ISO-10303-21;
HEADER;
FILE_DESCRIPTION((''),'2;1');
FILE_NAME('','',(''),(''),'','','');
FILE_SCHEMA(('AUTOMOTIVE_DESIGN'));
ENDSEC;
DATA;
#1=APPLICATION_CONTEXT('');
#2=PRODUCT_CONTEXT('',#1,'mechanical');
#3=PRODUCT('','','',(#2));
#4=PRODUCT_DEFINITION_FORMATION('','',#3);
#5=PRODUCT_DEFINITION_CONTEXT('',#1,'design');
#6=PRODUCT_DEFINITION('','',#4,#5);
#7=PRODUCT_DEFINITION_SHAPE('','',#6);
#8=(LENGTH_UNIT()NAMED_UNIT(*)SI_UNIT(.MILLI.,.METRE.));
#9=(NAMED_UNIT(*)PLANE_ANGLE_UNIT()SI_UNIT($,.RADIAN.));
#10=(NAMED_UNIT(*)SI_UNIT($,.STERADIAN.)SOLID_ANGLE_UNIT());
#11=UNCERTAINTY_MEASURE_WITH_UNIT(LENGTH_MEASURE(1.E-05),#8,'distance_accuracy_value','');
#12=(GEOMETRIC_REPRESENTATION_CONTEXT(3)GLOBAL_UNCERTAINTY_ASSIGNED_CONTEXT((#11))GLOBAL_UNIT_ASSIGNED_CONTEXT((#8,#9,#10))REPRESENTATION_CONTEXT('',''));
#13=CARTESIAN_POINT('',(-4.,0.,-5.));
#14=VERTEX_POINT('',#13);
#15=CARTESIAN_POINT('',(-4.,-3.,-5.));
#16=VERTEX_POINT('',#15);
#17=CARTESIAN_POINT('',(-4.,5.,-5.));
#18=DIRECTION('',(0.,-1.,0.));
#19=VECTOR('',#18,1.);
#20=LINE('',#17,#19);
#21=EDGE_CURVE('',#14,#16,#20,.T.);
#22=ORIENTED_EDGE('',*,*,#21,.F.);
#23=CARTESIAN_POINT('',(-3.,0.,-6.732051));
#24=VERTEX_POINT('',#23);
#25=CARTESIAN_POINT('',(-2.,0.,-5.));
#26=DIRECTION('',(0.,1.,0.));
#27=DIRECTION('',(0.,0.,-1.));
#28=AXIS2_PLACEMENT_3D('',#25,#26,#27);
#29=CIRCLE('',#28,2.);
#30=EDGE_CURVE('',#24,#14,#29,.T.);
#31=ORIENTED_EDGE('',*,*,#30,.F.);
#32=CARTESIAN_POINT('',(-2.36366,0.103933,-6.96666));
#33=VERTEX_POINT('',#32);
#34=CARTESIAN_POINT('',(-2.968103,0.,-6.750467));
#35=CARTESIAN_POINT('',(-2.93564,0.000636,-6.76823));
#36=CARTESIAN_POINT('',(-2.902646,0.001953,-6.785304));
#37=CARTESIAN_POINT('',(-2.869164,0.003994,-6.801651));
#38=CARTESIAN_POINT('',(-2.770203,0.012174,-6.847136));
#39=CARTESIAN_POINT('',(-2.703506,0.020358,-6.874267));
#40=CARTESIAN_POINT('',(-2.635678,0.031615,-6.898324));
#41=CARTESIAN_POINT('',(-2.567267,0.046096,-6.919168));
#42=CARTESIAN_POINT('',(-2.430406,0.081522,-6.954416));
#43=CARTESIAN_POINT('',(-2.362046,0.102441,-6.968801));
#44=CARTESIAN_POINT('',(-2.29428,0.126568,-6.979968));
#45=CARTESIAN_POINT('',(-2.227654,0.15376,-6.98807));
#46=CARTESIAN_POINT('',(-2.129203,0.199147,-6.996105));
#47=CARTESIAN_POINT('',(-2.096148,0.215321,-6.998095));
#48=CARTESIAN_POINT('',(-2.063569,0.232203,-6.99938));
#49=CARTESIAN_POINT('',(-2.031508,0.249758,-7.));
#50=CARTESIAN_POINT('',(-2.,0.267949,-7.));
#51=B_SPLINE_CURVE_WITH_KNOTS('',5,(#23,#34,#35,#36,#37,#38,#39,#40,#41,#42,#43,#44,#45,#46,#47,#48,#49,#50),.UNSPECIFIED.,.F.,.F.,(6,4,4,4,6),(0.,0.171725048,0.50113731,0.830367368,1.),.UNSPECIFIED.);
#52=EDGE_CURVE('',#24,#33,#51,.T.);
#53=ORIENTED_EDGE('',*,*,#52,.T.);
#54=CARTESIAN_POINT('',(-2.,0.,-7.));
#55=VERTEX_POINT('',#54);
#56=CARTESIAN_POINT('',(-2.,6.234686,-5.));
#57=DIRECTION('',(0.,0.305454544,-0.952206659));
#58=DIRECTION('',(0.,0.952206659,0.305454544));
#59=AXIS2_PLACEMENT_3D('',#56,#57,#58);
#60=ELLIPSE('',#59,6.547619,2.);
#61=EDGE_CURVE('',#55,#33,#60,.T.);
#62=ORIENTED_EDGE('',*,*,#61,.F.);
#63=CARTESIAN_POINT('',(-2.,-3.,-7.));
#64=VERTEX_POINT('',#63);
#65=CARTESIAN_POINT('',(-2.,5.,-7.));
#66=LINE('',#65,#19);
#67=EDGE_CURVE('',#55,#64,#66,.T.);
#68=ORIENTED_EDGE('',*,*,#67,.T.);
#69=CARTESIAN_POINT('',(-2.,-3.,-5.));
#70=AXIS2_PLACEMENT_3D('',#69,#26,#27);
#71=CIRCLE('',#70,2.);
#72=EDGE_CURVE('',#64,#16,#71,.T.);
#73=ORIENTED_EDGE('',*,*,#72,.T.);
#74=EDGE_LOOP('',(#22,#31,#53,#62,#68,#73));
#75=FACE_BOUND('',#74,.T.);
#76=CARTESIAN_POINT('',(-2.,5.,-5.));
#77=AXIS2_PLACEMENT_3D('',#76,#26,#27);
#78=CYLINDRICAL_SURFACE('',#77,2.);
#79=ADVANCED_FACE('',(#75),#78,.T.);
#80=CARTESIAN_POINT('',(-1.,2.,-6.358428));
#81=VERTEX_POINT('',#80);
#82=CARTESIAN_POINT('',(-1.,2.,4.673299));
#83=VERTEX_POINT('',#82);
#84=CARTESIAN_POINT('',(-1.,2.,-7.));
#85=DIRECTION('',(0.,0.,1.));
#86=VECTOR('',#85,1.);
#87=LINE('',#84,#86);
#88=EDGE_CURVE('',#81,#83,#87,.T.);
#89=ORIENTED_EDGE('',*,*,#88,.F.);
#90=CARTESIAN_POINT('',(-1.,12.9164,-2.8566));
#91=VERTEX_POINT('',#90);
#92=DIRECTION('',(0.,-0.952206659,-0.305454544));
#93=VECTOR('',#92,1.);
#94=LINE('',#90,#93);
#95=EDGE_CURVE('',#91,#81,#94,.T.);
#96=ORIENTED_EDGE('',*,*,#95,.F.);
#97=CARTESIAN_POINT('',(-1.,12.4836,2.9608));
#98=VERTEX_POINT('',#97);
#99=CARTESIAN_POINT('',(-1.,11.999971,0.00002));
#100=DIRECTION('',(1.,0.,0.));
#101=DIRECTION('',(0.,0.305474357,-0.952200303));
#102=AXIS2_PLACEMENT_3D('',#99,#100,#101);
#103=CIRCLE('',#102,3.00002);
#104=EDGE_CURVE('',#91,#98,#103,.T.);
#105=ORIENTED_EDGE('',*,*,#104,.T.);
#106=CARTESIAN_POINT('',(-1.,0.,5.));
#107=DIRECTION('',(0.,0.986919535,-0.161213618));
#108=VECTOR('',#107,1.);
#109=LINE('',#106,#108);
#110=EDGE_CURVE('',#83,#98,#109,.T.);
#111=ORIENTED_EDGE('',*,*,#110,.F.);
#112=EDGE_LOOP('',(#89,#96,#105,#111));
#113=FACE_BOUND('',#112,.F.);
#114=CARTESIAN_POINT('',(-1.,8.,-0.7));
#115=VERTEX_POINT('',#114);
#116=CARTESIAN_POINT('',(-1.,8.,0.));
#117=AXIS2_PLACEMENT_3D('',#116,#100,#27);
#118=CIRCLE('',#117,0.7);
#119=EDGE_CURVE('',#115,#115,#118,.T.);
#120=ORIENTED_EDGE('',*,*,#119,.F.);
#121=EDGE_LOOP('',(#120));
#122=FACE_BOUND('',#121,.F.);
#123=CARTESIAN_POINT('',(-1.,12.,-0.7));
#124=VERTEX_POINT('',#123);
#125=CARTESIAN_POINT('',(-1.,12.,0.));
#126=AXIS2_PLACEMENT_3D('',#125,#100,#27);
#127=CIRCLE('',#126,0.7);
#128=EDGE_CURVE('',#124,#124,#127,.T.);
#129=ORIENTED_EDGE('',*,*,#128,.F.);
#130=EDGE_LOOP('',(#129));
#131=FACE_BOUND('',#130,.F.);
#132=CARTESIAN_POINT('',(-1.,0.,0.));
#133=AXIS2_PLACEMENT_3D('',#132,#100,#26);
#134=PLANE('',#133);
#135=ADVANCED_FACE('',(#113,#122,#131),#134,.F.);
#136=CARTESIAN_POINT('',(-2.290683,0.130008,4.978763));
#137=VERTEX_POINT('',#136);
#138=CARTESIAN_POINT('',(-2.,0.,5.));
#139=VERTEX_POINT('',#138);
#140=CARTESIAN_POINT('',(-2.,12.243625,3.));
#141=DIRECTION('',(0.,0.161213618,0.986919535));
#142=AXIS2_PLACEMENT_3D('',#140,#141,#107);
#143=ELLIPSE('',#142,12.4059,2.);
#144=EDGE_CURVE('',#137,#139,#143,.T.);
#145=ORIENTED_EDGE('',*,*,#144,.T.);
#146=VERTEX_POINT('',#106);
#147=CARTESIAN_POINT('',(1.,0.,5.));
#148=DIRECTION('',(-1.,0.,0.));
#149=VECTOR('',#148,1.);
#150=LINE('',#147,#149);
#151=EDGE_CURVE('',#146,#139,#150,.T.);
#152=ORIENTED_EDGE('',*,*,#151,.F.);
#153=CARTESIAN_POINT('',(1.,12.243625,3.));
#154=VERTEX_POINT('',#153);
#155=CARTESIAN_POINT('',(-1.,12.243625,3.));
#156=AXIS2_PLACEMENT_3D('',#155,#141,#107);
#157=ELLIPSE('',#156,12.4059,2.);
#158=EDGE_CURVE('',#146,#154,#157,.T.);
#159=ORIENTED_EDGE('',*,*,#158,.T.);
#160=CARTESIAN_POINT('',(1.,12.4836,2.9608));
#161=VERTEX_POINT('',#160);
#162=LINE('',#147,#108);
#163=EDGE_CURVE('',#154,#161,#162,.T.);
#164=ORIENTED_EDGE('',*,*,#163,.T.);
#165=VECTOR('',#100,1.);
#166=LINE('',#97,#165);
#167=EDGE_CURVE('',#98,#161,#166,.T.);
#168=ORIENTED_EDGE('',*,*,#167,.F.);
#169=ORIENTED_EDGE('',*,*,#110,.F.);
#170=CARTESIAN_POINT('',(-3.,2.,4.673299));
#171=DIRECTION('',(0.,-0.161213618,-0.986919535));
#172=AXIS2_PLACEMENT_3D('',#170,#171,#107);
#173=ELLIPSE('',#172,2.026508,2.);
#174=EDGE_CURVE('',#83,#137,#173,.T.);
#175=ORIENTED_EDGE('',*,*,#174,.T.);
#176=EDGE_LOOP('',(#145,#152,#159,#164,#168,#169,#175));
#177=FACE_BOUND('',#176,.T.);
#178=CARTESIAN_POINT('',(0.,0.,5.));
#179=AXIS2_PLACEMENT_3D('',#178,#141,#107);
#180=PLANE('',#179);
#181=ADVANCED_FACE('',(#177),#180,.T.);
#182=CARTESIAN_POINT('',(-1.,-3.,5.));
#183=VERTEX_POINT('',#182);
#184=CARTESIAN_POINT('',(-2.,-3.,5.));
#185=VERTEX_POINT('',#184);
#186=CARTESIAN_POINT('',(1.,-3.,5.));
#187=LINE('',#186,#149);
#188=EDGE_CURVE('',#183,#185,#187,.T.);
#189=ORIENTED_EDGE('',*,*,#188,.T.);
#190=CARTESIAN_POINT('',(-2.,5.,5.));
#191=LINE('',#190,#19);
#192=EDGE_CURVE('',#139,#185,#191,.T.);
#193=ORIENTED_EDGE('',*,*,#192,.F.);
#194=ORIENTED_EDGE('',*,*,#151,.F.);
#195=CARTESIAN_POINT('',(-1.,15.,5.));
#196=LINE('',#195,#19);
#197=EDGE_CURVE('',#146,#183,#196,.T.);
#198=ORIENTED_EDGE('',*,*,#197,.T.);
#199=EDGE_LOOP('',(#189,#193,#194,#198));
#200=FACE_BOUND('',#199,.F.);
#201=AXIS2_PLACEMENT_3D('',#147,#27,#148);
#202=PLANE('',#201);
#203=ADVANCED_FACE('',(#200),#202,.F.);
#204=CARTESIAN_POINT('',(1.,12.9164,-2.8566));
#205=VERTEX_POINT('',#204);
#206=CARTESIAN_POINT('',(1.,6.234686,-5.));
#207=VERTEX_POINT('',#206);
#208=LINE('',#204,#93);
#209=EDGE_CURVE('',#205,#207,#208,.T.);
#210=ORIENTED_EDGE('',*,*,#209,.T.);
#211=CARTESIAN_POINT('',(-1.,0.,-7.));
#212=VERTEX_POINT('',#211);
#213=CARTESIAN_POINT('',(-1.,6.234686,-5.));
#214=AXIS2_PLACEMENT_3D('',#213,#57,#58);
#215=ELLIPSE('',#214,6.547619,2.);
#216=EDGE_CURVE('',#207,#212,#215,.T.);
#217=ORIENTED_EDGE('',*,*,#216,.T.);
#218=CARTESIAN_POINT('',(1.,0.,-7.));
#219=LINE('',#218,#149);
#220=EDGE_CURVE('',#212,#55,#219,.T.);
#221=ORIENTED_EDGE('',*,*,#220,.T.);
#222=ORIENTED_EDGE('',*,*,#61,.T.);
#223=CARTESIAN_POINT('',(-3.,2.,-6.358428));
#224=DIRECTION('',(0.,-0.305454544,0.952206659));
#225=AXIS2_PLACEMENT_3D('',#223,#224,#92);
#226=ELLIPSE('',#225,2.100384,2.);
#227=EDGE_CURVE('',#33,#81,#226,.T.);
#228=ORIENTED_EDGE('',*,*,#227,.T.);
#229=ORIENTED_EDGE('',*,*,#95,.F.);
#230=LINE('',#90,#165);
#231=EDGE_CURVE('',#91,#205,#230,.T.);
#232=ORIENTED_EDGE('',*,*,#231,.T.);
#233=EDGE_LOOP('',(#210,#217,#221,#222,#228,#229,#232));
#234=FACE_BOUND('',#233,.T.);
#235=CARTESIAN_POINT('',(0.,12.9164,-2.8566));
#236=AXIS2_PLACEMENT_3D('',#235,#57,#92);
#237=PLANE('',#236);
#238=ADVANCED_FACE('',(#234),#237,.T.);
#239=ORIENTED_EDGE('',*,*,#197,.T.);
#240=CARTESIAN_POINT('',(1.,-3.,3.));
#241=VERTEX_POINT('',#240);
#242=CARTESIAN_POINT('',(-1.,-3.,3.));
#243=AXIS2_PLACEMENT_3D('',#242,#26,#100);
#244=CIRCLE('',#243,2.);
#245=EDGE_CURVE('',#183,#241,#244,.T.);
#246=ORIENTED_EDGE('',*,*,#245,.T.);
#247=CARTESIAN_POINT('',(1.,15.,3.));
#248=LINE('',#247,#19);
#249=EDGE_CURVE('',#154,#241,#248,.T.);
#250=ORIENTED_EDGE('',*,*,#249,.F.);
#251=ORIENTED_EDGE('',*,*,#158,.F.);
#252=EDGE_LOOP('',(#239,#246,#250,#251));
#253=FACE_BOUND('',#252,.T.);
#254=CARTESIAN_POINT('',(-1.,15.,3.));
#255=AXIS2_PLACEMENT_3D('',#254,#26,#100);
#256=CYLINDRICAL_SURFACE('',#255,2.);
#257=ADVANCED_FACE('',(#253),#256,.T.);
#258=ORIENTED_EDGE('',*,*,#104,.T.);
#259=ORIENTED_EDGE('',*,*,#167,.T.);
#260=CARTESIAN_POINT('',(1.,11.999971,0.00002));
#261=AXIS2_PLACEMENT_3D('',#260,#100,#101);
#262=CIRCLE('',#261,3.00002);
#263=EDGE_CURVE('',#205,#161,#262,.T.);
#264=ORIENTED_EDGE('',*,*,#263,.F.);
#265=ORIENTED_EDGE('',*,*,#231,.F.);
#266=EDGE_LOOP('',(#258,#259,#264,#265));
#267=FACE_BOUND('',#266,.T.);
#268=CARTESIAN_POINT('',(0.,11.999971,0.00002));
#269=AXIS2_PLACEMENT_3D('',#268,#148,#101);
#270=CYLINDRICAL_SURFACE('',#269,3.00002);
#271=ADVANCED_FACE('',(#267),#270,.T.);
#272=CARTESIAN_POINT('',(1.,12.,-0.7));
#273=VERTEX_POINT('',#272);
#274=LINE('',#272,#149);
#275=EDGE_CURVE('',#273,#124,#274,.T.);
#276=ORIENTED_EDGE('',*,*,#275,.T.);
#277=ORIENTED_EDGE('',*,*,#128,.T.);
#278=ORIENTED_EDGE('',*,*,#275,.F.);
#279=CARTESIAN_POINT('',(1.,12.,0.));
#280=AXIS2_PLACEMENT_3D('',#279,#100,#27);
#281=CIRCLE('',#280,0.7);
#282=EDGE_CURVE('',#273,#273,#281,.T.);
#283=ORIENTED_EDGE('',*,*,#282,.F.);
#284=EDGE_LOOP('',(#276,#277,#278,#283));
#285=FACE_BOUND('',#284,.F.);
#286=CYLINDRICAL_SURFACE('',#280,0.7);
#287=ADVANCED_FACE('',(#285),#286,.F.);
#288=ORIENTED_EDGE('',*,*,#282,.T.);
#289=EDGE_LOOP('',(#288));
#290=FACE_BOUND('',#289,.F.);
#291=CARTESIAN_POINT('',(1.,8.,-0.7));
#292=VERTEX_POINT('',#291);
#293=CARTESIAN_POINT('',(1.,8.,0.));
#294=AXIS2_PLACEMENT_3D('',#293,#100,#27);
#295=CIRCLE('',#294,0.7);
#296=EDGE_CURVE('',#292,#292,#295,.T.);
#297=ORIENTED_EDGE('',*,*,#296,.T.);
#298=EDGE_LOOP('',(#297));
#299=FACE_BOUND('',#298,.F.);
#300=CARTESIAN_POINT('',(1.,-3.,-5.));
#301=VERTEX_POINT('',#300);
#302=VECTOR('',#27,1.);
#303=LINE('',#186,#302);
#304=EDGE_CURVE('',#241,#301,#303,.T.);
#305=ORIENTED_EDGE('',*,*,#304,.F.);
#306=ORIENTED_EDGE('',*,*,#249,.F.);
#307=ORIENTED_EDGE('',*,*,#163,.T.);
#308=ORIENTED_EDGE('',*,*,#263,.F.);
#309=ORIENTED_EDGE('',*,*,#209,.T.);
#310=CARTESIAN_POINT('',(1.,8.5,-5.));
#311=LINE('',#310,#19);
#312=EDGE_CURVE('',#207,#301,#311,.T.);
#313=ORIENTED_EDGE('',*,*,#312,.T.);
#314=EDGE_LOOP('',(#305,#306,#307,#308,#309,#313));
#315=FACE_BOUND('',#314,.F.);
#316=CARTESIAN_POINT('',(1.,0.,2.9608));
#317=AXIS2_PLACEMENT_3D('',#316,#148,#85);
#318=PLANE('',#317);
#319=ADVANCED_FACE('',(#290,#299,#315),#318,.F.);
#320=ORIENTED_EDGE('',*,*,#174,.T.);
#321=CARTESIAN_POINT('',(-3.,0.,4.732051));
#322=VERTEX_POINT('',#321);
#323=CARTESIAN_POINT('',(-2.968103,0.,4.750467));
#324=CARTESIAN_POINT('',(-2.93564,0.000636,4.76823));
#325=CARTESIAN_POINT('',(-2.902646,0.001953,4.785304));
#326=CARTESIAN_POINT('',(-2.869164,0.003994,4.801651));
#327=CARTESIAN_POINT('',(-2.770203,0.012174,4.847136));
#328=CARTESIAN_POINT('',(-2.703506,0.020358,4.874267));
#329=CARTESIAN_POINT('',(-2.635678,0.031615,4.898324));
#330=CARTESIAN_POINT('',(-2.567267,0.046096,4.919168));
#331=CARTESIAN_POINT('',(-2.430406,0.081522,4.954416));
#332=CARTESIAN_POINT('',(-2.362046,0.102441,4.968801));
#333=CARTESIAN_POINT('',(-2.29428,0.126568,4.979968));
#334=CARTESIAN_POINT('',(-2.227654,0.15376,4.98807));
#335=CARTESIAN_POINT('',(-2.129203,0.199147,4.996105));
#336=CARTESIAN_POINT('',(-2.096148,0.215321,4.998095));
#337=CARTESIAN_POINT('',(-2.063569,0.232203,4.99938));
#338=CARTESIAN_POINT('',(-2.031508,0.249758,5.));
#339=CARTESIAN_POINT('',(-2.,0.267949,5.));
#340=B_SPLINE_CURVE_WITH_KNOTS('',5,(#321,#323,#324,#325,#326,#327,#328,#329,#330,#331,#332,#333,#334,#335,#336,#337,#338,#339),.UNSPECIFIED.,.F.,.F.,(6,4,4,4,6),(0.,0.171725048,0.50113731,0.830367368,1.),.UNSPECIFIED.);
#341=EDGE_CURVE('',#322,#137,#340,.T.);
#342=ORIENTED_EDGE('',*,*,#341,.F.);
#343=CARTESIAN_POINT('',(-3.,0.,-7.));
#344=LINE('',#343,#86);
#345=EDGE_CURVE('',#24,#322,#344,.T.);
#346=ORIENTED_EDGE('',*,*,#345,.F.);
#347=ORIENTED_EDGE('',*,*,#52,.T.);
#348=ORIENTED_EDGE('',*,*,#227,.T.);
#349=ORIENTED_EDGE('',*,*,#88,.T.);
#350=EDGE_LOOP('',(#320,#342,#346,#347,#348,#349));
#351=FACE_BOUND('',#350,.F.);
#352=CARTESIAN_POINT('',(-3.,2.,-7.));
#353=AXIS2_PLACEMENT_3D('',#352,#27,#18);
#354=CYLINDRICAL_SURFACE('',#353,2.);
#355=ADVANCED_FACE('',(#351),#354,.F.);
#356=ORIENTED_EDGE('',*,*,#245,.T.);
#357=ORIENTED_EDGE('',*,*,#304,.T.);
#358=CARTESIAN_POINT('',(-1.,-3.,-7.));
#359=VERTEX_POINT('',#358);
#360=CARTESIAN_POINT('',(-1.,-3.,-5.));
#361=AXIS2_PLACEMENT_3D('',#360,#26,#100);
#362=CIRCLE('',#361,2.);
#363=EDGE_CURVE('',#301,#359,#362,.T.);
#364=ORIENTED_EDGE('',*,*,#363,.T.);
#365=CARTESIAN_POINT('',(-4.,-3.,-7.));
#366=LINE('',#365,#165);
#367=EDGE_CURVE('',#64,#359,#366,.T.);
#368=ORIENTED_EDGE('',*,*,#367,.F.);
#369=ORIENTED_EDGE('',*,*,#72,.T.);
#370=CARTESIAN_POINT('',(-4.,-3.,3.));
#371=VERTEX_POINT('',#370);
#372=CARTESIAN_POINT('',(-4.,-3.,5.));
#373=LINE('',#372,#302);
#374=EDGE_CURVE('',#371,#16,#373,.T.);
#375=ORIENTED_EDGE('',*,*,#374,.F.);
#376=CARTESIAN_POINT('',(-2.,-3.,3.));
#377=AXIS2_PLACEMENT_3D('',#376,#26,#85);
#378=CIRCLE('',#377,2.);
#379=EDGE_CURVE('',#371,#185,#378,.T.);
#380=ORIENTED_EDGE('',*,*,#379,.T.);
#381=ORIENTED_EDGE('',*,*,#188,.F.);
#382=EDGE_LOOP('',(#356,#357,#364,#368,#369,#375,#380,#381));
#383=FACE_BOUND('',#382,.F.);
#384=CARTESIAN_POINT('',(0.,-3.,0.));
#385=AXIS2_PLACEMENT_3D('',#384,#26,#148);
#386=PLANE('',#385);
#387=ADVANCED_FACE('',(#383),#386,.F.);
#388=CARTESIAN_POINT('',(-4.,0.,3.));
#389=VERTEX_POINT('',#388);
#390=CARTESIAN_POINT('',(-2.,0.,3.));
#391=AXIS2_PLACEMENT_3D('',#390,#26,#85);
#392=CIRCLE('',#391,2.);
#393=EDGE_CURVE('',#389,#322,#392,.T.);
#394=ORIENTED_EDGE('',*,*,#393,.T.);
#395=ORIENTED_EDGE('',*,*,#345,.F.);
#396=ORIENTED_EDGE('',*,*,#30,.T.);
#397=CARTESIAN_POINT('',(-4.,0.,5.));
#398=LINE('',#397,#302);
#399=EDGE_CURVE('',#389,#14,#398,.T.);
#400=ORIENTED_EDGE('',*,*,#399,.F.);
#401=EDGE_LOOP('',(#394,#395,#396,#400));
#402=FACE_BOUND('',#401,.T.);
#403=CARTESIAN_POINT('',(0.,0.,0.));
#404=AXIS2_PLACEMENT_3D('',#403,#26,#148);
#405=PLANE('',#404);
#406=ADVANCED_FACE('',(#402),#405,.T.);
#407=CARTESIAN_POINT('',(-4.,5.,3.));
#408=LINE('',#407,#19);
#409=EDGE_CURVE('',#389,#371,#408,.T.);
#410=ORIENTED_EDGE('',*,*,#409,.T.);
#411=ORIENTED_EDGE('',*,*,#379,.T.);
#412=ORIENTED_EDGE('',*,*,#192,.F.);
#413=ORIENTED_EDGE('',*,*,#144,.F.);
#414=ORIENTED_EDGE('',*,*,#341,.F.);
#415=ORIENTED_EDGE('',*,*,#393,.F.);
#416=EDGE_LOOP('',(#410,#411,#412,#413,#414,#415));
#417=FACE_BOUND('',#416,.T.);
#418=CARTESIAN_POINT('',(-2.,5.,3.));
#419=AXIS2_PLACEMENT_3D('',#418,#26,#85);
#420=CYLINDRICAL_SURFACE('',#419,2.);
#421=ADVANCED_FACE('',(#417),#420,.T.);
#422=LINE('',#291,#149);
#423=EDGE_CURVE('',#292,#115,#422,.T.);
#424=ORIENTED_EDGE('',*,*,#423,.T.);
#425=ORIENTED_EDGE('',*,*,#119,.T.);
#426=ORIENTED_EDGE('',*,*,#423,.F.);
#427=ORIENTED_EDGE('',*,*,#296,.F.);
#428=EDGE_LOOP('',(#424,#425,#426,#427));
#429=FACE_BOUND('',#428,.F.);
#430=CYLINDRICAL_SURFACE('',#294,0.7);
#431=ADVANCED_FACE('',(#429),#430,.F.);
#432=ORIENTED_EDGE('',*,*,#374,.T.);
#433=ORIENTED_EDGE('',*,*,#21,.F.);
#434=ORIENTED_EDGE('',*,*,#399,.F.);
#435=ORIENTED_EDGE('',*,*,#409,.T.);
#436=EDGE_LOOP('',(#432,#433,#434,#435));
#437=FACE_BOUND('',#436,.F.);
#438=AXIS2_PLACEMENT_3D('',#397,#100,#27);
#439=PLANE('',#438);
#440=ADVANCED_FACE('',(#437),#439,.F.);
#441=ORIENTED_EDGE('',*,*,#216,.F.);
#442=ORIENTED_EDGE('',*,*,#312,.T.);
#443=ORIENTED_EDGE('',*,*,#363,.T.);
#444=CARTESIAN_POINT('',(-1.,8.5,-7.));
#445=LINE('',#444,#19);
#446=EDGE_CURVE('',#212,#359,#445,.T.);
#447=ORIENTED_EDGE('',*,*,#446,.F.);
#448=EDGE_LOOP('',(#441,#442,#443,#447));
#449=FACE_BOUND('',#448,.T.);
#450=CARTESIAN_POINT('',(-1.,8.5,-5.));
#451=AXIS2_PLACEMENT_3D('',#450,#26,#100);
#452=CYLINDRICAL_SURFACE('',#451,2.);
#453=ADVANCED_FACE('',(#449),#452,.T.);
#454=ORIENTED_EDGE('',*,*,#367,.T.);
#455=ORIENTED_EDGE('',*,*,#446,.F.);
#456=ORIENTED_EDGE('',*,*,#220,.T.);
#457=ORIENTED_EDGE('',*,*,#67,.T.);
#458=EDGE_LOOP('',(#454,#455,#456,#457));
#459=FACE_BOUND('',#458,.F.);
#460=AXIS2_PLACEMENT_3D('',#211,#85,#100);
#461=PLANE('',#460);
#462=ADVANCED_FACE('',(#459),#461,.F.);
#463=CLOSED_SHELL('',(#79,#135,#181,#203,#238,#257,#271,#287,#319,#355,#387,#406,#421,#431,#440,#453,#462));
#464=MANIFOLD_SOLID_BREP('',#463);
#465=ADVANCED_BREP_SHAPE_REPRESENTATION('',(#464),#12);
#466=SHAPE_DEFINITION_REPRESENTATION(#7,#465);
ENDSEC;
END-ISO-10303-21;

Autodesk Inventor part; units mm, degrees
ref_plane "YZ Plane" through (0, 0, 0) normal (1, 0, 0) x (0, 1, 0)
ref_plane "XZ Plane" through (0, 0, 0) normal (0, 1, 0) x (-1, 0, 0)
ref_plane "XY Plane" through (0, 0, 0) normal (0, 0, 1) x (1, 0, 0)
sketch "Skizze1" plane through (0, 0, 0) normal (1, 0, 0) x (0, 1, 0)
  arc A0 (12.9164, -2.8566) -> (12.4836, 2.9608) centre (12, 0) ccw
  line L0 (12.9164, -2.8566) -> (0, -7)
  line L1 (0, -7) -> (0, 5)
  line L2 (0, 5) -> (12.4836, 2.9608)
  point P0 (0, 0)
  dimension "d0" = 3
  dimension "d1" = 12
  dimension "d2" = 12
  dimension "d3" = 5
extrude "Extrusion1" add sketch "Skizze1" along normal mid plane 2
sketch "Skizze2" plane through (0, 0, 0) normal (0, 1, 0) x (-1, 0, 0)
  line L0 (-1, 2.9608) -> (-1, 5) projected
  line L1 (-1, 5) -> (4, 5)
  line L2 (4, 5) -> (4, -7)
  line L3 (4, -7) -> (-1, -7)
  line L4 (-1, -7) -> (-1, 5)
  line L5 (1, -7) -> (-1, -7) projected
  point P0 (0, 0)
  dimension "d6" = 5
extrude "Extrusion2" add sketch "Skizze2" against normal blind 3
fillet "Rundung1" radius 2 1 edges at (-1, 0, -1)
sketch "Skizze3" plane through (1, 0, 0) normal (1, 0, 0) x (0, 0, -1)
  arc A0 (2.8566, 12.9164) -> (-2.9608, 12.4836) centre (0, 12) ccw projected
  circle A1 centre (0, 12) radius 0.7
  line L0 (0, 12) -> (0, -3) construction
  line L1 (7, -3) -> (-5, -3) projected
  circle A2 centre (0, 8) radius 0.7
  point P0 (0, 0)
  dimension "d10" = 1.4
  dimension "d13" = 4
extrude "Extrusion3" cut sketch "Skizze3" against normal blind 4.75
fillet "Rundung2" radius 2 4 edges at (-4, -1.5, 5) (1, -1.5, 5) (1, -1.5, -7) (-4, -1.5, -7)
properties part number "P_Wing_aileron_lever"
